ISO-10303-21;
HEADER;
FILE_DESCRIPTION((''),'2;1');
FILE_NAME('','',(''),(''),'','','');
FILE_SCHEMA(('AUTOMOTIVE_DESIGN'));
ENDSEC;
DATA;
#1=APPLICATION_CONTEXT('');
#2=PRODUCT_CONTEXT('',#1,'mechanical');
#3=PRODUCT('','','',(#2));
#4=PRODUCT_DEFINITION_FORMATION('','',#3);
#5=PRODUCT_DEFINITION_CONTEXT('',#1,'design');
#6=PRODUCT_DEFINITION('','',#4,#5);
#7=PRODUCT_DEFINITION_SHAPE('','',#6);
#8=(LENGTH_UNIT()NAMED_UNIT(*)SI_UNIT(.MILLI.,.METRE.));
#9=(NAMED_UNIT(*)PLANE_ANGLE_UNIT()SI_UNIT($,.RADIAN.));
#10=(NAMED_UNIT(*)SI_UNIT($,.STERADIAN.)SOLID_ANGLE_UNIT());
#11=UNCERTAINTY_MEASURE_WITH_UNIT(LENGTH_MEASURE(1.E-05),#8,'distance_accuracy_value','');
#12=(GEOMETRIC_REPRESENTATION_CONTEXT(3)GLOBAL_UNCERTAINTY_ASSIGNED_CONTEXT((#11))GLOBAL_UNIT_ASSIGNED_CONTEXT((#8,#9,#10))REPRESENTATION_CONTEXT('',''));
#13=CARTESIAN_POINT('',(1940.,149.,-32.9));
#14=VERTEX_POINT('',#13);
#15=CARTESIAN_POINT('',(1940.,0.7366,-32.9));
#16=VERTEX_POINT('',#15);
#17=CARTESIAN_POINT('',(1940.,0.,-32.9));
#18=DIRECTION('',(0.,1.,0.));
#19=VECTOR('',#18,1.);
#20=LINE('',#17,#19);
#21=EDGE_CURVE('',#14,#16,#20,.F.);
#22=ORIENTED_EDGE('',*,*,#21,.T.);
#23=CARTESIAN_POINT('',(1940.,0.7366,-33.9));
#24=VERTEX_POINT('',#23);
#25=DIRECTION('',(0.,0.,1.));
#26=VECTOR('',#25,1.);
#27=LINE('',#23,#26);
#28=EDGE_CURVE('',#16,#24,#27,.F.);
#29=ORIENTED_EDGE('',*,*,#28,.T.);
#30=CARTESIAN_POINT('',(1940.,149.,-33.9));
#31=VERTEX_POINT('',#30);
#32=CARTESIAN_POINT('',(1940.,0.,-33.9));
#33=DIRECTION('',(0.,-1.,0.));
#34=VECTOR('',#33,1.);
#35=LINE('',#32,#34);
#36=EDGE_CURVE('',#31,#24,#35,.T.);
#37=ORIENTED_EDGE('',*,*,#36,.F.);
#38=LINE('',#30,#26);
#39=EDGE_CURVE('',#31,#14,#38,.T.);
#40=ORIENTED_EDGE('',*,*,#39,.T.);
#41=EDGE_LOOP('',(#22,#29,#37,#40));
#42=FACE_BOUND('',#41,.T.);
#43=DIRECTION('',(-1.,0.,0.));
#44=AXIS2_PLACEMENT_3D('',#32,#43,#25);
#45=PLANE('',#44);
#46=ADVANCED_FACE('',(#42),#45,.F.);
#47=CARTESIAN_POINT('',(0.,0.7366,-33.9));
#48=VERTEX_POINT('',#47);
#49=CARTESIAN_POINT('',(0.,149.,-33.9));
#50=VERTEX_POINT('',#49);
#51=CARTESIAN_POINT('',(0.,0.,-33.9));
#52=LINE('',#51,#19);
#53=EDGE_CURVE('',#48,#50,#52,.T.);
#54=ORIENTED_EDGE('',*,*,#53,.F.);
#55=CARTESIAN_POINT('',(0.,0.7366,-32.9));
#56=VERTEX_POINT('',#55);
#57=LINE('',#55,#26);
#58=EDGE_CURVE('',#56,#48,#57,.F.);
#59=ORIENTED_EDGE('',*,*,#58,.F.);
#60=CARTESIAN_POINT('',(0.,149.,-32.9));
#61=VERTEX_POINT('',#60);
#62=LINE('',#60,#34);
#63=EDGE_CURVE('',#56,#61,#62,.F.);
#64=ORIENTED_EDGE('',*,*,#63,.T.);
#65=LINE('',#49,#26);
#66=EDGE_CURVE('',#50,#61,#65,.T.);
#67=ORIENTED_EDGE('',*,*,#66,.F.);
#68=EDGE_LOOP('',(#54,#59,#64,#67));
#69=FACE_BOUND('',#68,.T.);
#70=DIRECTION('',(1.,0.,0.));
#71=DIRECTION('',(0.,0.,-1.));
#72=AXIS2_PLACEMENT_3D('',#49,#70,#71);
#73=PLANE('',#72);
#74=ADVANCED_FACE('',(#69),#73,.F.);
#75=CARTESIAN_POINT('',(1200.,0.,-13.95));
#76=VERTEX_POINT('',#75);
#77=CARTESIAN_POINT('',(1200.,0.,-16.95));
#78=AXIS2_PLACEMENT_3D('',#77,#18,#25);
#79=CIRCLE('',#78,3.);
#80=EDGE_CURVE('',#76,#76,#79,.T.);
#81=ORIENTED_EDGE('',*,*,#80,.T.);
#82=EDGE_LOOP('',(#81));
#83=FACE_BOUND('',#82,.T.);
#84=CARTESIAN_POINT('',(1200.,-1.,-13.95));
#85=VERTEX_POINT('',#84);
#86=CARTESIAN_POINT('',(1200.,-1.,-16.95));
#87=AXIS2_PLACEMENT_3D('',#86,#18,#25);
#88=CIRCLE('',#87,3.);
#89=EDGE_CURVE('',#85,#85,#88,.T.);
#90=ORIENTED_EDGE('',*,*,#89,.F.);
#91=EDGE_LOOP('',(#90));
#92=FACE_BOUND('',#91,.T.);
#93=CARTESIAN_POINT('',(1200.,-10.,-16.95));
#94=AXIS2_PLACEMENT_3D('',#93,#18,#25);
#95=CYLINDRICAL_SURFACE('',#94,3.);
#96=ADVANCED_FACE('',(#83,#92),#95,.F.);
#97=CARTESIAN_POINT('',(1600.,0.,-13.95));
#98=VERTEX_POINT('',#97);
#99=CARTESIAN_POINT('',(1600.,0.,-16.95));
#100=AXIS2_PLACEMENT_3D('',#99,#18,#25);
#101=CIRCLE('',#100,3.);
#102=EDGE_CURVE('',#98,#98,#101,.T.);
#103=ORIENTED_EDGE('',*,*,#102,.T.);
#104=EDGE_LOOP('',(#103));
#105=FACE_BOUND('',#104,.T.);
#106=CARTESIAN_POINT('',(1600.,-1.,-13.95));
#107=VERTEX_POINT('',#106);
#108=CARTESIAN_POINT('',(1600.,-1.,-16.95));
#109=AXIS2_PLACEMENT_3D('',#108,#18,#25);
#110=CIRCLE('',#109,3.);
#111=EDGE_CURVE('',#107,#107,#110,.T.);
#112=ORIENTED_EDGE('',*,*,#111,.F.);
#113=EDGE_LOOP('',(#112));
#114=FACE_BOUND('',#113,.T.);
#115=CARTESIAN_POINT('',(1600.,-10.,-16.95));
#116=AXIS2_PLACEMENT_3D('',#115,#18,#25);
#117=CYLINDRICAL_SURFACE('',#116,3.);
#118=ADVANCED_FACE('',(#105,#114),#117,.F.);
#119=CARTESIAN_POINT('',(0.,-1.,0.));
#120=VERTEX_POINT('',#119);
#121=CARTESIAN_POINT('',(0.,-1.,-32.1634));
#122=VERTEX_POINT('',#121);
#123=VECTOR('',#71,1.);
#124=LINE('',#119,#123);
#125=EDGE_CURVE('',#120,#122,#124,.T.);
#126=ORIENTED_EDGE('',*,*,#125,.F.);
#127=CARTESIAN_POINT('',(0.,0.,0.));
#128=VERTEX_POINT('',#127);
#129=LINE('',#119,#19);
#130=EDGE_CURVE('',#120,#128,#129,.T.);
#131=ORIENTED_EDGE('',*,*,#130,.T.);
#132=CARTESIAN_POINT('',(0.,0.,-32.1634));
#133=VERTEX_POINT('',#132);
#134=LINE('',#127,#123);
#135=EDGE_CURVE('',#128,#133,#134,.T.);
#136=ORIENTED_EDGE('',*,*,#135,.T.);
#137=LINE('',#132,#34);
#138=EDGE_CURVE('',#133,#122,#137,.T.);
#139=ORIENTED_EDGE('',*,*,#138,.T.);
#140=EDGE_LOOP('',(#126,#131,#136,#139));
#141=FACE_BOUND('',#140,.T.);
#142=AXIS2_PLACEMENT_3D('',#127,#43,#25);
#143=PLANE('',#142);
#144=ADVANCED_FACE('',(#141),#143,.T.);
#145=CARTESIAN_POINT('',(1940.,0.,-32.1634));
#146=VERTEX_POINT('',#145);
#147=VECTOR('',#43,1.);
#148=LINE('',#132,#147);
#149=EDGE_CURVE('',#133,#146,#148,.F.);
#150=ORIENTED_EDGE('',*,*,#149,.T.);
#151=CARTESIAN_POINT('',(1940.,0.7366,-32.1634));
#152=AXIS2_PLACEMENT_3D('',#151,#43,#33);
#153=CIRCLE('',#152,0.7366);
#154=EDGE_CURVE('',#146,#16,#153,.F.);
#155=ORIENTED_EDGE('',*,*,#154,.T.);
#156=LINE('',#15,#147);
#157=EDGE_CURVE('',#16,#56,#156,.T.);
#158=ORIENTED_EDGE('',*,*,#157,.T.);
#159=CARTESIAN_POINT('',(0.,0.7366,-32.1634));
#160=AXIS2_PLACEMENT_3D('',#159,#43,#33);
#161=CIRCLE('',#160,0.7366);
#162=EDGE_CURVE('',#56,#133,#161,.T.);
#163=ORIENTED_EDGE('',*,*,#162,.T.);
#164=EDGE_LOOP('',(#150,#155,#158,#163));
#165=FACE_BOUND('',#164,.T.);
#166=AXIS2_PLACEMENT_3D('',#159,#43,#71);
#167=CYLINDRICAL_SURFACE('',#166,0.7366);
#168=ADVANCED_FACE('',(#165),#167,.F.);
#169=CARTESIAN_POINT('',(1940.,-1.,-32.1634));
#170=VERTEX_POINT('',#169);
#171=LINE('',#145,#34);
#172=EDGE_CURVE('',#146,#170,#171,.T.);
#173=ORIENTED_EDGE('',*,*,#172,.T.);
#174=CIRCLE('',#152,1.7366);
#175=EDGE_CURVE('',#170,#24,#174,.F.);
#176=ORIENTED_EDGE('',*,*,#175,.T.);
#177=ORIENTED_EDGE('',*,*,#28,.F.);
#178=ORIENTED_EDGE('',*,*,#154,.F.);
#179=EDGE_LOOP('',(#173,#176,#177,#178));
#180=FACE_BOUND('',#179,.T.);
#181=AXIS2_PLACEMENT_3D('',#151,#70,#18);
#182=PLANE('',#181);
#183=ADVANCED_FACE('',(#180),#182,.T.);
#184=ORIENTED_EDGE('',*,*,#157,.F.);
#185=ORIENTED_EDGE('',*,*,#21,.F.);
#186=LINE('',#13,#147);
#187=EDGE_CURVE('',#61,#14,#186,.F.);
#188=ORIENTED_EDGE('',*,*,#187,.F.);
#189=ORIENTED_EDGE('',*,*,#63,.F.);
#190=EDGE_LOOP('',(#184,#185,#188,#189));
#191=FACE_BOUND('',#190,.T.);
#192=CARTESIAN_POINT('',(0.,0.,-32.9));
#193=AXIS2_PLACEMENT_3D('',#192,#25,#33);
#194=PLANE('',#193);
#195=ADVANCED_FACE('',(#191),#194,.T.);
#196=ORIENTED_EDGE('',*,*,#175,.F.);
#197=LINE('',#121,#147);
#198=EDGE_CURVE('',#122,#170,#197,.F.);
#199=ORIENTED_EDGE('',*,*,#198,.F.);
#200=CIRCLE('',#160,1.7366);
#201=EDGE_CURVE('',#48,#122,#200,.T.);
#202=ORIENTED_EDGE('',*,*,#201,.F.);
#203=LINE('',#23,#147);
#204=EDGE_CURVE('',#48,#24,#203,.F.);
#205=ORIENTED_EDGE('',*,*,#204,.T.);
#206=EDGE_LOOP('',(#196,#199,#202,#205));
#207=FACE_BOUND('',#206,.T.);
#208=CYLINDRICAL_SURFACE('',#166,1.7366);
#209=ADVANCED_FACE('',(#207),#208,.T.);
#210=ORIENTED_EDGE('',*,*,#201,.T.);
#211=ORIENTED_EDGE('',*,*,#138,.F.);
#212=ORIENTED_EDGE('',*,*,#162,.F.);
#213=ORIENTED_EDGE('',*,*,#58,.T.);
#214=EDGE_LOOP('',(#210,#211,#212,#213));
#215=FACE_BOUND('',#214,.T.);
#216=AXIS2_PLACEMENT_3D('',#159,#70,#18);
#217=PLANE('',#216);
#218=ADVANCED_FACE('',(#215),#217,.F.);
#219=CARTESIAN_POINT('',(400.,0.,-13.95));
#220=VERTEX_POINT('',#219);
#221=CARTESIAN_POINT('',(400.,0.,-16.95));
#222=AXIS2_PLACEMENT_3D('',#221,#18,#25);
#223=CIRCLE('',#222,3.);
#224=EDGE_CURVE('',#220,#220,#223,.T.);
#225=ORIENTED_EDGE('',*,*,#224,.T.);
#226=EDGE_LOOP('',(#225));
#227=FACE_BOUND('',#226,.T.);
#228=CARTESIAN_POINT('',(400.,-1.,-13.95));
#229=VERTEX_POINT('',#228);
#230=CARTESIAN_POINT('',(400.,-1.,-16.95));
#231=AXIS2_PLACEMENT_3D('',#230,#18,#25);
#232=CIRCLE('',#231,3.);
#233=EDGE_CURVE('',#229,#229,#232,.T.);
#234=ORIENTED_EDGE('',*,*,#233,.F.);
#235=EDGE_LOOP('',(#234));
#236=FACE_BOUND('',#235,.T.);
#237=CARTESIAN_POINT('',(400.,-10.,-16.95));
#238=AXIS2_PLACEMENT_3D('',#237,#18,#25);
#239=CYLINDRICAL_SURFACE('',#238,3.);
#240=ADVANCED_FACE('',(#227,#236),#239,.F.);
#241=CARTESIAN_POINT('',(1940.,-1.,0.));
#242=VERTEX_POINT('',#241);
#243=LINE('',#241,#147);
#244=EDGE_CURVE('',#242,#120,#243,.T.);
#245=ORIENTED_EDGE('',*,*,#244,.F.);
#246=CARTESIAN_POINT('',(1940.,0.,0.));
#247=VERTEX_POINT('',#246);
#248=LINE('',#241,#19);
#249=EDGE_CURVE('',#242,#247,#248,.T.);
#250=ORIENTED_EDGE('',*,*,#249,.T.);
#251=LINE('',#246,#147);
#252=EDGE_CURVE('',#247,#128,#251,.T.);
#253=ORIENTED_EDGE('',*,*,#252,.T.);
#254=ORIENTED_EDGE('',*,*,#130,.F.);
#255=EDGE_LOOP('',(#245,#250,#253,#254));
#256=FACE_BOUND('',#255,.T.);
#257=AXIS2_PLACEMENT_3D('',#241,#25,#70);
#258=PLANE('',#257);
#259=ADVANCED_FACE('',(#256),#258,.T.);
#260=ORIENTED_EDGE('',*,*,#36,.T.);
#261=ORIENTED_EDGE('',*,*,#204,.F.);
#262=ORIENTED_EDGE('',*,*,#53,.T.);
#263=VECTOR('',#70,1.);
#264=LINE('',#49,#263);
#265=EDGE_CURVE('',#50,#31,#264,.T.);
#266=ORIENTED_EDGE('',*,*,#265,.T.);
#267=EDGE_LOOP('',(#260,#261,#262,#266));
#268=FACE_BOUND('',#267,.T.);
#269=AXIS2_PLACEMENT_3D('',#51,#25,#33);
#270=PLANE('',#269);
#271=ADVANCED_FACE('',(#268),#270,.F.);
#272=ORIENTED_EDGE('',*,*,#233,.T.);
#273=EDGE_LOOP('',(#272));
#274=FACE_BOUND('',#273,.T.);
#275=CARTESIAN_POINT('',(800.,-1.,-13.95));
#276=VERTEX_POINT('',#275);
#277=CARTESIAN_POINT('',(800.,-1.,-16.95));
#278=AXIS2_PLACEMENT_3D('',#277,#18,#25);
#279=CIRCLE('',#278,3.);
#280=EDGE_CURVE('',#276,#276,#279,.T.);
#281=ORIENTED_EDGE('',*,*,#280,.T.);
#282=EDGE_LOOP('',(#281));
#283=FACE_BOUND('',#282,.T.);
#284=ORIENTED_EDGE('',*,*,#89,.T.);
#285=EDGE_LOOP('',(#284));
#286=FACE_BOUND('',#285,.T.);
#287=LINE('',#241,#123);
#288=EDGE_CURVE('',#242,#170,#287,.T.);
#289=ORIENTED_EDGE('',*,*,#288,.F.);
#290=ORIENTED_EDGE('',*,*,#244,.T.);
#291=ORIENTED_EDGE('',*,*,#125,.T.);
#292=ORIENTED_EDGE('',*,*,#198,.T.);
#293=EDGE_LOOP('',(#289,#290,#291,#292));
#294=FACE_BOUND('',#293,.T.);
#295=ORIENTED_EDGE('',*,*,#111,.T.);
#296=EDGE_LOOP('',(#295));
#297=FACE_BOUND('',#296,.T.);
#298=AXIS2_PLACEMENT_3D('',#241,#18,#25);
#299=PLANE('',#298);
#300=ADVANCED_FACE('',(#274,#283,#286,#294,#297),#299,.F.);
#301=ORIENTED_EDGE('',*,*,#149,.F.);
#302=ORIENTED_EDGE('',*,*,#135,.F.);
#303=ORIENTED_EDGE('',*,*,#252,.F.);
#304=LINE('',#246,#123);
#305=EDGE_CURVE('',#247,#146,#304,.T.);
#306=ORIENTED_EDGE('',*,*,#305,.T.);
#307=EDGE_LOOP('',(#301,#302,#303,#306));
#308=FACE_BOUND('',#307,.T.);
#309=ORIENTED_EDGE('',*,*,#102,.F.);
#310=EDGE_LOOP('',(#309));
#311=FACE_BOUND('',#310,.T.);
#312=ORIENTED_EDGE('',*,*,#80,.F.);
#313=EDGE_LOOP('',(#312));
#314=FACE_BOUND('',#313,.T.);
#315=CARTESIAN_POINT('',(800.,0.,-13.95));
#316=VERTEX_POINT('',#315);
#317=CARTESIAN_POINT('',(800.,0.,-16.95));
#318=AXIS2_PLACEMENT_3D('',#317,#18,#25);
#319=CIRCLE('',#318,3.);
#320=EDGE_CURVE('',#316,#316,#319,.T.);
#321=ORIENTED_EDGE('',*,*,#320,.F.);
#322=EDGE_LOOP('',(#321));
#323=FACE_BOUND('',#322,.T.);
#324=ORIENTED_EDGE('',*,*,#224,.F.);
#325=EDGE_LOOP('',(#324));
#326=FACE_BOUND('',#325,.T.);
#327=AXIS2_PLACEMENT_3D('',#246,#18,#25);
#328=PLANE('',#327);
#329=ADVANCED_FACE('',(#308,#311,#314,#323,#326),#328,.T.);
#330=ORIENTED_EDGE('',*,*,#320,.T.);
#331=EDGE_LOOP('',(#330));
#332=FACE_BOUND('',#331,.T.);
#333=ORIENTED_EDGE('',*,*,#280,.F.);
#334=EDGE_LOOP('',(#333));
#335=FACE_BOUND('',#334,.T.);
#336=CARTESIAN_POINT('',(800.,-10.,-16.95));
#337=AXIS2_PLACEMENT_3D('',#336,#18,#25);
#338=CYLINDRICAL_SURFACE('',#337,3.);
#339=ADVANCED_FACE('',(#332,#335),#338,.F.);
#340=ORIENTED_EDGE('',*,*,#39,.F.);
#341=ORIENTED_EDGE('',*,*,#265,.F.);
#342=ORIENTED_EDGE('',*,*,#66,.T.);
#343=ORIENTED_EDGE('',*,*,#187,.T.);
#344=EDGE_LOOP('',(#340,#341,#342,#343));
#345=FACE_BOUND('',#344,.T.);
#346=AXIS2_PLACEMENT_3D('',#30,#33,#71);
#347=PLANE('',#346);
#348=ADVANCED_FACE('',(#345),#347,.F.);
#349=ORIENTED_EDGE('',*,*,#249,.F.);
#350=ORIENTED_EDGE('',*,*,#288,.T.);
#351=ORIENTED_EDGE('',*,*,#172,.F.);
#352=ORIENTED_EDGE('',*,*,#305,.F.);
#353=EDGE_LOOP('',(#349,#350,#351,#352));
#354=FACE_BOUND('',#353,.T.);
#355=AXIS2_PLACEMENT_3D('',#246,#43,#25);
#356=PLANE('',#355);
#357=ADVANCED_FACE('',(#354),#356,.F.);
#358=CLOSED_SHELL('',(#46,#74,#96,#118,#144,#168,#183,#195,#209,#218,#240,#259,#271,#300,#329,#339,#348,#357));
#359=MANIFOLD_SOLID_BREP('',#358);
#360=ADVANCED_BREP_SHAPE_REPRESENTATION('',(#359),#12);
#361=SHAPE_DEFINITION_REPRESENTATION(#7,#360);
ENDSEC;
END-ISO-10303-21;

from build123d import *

# Parameters (mm, degrees)
SKETCH2_W                    = 33.9
SKETCH2_H                    = 1
BASE_FLANGE1_DEPTH           = 1940
EDGE_FLANGE2_STRIP_W         = 5.4732
EDGE_FLANGE2_STRIP_H         = 1
EDGE_FLANGE2_STRIP_CUT_DEPTH = 1940
EDGE_FLANGE2_DEPTH           = 1940
SKETCH10_R                   = 3
CUT_EXTRUDE1_DEPTH           = 10
SKETCH10_3_R                 = 3
CUT_EXTRUDE2_DEPTH           = 10


# Sheet-metal steps are written as plain solids
with BuildPart() as part:
    # Sketch2 → Base-Flange1 (new body)
    with BuildSketch(Plane(origin=(0, 0, 0), x_dir=(0, 0, -1), z_dir=(1, 0, 0))):
        with Locations((16.95, -0.5)):
            Rectangle(SKETCH2_W, SKETCH2_H)
    extrude(amount=BASE_FLANGE1_DEPTH)

    # Edge-Flange2 strip (across the edge) → Edge-Flange2 strip cut (cut)
    with BuildSketch(Plane(origin=(1940, 0, -33.9), x_dir=(0, 0, 1), z_dir=(-1, 0, 0))):
        with Locations((-1, -0.5)):
            Rectangle(EDGE_FLANGE2_STRIP_W, EDGE_FLANGE2_STRIP_H)
    extrude(amount=EDGE_FLANGE2_STRIP_CUT_DEPTH, mode=Mode.SUBTRACT)

    # Edge-Flange2 section (across the edge) → Edge-Flange2 (add)
    with BuildSketch(Plane(origin=(1940, 0, -33.9), x_dir=(0, 0, 1), z_dir=(-1, 0, 0))):
        with BuildLine():
            Line((0, 0.7366), (0, 149))
            Line((0, 149), (1, 149))
            Line((1, 149), (1, 0.7366))
            ThreePointArc((1, 0.7366), (1.215745145, 0.215745145), (1.7366, 0))
            Line((1.7366, 0), (1.7366, -1))
            ThreePointArc((1.7366, -1), (0.508638364, -0.491361636), (0, 0.7366))
        make_face()
    extrude(amount=EDGE_FLANGE2_DEPTH)

    # Sketch10 → Cut-Extrude1 (cut)
    with BuildSketch(Plane(origin=(0, 0, 0), x_dir=(1, 0, 0), z_dir=(0, 1, 0))):
        with Locations(Location((800, 16.95, 0), (0, 0, 270))):
            Circle(SKETCH10_R)
    extrude(amount=-CUT_EXTRUDE1_DEPTH, mode=Mode.SUBTRACT)

    # Sketch10<3> → Cut-Extrude2 (cut)
    with BuildSketch(Plane(origin=(0, 0, 0), x_dir=(1, 0, 0), z_dir=(0, 1, 0))):
        with Locations(Location((400, 16.95, 0), (0, 0, 270))):
            Circle(SKETCH10_3_R)
        with Locations(Location((800, 16.95, 0), (0, 0, 270))):
            Circle(SKETCH10_3_R)
        with Locations(Location((1200, 16.95, 0), (0, 0, 270))):
            Circle(SKETCH10_3_R)
        with Locations(Location((1600, 16.95, 0), (0, 0, 270))):
            Circle(SKETCH10_3_R)
    extrude(amount=-CUT_EXTRUDE2_DEPTH, mode=Mode.SUBTRACT)


solid = part.part
